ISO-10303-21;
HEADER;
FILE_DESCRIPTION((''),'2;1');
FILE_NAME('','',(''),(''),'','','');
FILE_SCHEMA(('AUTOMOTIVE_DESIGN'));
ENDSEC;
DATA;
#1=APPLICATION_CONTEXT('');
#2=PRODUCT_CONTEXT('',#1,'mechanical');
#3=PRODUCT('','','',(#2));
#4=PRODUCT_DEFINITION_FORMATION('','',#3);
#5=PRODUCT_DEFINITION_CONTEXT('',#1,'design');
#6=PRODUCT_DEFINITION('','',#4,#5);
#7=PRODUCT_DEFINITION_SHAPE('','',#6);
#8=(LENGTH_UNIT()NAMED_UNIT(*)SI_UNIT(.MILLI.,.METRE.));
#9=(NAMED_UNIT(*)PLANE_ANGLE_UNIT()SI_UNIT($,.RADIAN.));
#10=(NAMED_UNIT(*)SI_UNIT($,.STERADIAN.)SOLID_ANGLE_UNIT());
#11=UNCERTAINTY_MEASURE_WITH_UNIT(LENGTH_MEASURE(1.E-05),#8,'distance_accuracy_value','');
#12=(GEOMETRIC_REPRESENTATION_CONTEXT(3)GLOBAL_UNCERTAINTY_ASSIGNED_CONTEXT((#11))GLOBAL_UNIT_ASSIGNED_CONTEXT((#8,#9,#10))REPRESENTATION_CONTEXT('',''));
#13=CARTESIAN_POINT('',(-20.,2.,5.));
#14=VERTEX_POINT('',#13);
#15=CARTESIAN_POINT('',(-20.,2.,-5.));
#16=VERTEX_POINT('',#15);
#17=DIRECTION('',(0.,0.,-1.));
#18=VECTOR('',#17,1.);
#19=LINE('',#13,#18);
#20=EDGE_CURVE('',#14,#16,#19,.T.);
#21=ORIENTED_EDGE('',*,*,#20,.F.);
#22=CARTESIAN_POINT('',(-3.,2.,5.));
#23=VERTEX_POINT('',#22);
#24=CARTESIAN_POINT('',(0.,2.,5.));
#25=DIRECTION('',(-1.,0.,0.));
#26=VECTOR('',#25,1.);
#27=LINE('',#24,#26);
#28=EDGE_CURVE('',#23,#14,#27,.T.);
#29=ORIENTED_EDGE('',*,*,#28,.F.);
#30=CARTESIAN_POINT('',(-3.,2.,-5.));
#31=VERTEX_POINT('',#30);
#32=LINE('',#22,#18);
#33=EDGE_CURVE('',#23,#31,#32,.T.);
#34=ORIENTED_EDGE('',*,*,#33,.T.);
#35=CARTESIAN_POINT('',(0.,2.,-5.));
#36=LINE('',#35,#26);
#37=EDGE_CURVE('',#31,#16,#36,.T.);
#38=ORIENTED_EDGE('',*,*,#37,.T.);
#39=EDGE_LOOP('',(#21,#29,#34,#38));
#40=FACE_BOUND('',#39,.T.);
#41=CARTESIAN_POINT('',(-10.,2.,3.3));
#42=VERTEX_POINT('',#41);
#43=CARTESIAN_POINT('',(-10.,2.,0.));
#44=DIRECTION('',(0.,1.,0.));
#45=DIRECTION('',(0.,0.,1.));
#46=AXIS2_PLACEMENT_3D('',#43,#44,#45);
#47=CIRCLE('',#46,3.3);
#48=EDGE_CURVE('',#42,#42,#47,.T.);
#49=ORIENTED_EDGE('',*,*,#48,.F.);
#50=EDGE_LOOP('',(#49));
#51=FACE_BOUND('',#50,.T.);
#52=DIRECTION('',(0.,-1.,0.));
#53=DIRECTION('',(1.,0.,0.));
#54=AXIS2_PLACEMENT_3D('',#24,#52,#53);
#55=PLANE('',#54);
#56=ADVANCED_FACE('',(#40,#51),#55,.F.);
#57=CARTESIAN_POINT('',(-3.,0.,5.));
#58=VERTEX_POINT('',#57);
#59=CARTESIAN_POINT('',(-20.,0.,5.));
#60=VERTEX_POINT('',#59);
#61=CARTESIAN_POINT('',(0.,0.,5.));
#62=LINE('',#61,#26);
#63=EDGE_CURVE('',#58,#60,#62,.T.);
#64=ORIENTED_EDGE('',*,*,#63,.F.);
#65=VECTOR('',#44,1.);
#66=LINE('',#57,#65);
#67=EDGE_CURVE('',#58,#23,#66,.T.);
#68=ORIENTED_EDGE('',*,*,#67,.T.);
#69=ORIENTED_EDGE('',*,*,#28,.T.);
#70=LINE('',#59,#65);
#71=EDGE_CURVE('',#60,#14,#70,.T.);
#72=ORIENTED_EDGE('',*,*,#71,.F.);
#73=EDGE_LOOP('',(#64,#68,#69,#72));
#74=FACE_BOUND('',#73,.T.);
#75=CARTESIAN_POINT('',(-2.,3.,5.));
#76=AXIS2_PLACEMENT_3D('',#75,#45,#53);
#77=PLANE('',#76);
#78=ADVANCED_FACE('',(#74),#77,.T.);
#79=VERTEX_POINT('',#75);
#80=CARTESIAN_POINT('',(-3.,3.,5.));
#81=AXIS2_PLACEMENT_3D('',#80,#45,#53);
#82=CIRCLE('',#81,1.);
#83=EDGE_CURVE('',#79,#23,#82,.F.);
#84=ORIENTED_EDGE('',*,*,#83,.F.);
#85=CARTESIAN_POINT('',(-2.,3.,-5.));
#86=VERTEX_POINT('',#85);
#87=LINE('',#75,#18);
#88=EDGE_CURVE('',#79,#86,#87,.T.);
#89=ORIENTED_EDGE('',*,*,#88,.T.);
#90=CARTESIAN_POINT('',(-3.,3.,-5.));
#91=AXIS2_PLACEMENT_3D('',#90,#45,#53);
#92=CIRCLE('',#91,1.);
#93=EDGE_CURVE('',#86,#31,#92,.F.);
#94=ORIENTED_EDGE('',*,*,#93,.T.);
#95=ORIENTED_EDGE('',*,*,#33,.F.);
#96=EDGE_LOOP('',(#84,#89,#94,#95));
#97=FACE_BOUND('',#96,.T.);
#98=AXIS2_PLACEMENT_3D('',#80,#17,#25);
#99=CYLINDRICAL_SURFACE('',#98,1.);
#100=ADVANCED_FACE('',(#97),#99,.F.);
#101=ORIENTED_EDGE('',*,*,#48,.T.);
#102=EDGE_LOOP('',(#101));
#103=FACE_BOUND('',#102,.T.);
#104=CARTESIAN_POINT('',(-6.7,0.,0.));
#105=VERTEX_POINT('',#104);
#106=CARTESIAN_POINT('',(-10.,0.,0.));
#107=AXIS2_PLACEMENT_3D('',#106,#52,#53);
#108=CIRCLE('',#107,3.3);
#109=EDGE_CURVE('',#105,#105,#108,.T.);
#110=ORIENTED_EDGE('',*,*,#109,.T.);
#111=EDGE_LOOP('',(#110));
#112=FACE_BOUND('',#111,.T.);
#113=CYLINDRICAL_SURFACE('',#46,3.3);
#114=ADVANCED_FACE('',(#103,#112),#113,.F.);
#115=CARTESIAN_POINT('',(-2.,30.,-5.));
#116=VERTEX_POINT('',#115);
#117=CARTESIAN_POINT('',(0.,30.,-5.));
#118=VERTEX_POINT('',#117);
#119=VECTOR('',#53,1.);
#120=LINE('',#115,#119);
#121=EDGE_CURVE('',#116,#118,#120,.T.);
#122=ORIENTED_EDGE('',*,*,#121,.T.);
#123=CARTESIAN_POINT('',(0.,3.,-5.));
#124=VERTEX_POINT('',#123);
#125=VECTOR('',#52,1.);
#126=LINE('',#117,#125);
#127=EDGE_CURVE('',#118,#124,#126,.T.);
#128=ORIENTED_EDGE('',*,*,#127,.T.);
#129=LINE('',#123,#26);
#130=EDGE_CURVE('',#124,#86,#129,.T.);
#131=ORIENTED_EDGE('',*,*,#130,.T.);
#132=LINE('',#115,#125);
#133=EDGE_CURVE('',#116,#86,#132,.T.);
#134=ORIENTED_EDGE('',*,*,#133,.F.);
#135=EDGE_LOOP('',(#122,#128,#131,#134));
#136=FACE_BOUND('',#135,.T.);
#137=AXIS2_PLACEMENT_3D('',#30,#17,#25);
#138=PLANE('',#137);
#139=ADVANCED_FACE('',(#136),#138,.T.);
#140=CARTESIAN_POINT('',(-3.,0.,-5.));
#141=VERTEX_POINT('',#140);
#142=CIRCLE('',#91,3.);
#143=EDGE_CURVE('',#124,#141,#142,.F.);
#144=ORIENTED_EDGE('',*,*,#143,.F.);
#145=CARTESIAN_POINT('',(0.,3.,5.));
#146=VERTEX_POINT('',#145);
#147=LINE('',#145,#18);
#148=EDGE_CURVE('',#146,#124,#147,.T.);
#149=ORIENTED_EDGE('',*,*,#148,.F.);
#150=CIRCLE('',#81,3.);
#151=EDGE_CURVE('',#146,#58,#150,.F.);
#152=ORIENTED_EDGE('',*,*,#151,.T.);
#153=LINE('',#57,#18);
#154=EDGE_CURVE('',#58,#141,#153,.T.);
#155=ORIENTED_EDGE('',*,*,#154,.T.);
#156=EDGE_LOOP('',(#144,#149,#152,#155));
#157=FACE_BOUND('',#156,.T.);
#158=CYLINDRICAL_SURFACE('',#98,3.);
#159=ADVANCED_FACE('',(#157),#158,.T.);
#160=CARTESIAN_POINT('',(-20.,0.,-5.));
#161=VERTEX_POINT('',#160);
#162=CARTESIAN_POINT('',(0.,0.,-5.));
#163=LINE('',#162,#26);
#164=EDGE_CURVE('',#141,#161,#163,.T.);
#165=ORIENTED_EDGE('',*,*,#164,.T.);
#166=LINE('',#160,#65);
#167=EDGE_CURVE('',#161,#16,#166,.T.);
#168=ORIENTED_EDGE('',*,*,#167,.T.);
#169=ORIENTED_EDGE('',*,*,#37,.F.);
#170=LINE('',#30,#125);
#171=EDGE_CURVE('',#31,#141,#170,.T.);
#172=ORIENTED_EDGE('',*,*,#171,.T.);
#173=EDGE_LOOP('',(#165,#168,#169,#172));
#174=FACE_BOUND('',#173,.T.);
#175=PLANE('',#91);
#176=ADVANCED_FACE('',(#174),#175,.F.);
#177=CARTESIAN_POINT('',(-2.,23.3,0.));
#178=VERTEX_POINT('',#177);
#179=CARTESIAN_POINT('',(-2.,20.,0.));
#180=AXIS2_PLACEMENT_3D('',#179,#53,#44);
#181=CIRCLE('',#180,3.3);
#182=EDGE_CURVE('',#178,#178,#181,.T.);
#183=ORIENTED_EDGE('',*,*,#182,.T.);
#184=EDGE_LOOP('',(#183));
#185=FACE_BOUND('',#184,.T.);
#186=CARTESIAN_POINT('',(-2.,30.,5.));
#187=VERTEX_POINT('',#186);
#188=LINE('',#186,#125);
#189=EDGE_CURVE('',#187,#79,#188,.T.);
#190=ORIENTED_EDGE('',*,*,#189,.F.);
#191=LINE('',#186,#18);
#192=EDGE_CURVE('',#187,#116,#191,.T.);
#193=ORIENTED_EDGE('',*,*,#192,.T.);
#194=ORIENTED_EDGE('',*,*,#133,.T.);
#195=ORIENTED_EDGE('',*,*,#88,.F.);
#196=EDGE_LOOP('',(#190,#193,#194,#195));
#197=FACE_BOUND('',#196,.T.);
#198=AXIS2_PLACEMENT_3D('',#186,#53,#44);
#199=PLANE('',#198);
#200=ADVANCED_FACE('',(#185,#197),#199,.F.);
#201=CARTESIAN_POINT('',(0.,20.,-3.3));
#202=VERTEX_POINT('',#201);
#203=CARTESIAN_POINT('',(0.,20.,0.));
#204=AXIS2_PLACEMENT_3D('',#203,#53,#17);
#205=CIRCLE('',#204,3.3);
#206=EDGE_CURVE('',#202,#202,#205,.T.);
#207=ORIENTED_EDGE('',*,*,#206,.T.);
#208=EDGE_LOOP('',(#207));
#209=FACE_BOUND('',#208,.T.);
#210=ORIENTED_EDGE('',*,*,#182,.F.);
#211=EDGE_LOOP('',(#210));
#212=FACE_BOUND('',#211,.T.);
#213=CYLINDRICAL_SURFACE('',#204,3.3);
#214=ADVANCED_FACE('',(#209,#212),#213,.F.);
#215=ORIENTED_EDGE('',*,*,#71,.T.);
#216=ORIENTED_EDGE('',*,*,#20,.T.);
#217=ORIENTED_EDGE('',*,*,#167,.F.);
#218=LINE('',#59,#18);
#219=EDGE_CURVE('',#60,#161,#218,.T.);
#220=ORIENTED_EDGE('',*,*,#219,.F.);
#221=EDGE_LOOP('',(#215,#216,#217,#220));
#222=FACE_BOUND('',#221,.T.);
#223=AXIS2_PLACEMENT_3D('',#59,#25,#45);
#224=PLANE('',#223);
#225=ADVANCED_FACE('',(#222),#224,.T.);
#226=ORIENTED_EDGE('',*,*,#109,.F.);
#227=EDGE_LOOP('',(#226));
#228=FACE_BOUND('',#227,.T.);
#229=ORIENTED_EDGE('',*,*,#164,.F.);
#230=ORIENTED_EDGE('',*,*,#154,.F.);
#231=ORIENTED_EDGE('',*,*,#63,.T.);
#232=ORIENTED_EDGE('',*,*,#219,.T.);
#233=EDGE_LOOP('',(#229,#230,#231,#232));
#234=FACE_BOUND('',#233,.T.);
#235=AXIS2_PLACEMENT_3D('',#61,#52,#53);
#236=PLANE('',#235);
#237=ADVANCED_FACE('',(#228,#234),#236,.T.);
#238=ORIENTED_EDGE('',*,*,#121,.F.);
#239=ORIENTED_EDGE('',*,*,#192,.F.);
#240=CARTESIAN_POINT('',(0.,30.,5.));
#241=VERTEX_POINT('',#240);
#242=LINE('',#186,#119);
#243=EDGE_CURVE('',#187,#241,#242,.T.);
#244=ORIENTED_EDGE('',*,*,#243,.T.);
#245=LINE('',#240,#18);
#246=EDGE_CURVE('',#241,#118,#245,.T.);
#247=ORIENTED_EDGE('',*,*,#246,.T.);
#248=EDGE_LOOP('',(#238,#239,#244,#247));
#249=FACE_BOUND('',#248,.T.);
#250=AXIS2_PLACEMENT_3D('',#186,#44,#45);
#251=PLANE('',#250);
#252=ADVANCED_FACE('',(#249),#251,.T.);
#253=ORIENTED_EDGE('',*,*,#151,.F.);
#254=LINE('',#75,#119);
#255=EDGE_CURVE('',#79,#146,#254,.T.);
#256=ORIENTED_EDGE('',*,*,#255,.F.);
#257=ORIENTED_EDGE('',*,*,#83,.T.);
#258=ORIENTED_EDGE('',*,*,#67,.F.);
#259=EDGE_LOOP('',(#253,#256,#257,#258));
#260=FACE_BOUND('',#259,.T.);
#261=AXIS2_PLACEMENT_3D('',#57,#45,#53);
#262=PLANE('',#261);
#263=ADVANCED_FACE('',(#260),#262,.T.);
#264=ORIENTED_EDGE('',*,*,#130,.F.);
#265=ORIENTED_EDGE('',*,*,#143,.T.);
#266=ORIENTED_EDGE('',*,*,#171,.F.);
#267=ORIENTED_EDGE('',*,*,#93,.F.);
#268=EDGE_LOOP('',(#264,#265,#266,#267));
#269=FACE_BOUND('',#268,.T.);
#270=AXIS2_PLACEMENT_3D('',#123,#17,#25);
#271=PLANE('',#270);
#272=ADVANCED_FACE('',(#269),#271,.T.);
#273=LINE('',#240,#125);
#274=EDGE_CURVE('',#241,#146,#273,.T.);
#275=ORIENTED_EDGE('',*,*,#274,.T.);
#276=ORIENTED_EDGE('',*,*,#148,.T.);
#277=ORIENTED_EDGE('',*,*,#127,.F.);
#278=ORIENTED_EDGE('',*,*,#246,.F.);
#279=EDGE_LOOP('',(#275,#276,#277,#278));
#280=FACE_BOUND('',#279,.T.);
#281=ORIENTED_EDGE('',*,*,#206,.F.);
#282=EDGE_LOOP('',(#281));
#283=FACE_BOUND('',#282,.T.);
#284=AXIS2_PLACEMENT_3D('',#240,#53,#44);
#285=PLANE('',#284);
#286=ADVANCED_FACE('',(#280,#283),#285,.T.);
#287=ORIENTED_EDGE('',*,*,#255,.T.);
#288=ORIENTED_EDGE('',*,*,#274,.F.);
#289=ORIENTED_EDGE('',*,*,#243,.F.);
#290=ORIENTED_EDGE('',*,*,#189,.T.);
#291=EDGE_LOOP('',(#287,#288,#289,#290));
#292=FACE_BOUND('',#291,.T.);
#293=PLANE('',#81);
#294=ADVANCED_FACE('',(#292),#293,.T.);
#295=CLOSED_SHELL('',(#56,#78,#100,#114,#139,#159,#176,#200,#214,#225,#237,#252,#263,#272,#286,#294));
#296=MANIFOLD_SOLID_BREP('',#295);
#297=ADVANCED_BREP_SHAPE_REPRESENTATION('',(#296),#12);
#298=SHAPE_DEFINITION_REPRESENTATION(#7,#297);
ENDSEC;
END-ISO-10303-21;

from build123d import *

# Parameters (mm, degrees)
BRIDA_BASE1_DEPTH                          = 5
TALADRO_DE_MARGEN_PARA_M65_D               = 6.6
TALADRO_DE_MARGEN_PARA_M65_DEPTH           = 11.62
TALADRO_DE_MARGEN_PARA_M65_TIP             = 1.982840043
TALADRO_DE_MARGEN_PARA_M65_ON_FACE_2_D     = 6.6
TALADRO_DE_MARGEN_PARA_M65_ON_FACE_2_DEPTH = 11.62
TALADRO_DE_MARGEN_PARA_M65_ON_FACE_2_TIP   = 1.982840043


# Sheet-metal steps are written as plain solids
with BuildPart() as part:
    # Croquis1 → Brida base1 (new, symmetric)
    with BuildSketch(Plane.XY):
        with BuildLine():
            Line((0, 30), (0, 3))
            ThreePointArc((0, 3), (-0.878679656, 0.878679656), (-3, 0))
            Line((-3, 0), (-20, 0))
            Line((-20, 0), (-20, 2))
            Line((-20, 2), (-3, 2))
            ThreePointArc((-3, 2), (-2.292893219, 2.292893219), (-2, 3))
            Line((-2, 3), (-2, 30))
            Line((-2, 30), (0, 30))
        make_face()
    extrude(amount=BRIDA_BASE1_DEPTH, both=True)

    # Taladro de margen para M65
    with Locations(Plane(origin=(0, 20, 0), x_dir=(0, 1, 0), z_dir=(1, 0, 0))):
        with Locations((0, 0)):
            Hole(TALADRO_DE_MARGEN_PARA_M65_D / 2, depth=TALADRO_DE_MARGEN_PARA_M65_DEPTH)
            with Locations((0, 0, -(TALADRO_DE_MARGEN_PARA_M65_DEPTH + TALADRO_DE_MARGEN_PARA_M65_TIP / 2))):  # 118° drill point
                Cone(0, TALADRO_DE_MARGEN_PARA_M65_D / 2, TALADRO_DE_MARGEN_PARA_M65_TIP, mode=Mode.SUBTRACT)

    # Taladro de margen para M65 on face 2
    with Locations(Plane(origin=(-10, 2, 0), x_dir=(0, 0, 1), z_dir=(0, 1, 0))):
        with Locations((0, 0)):
            Hole(TALADRO_DE_MARGEN_PARA_M65_ON_FACE_2_D / 2, depth=TALADRO_DE_MARGEN_PARA_M65_ON_FACE_2_DEPTH)
            with Locations((0, 0, -(TALADRO_DE_MARGEN_PARA_M65_ON_FACE_2_DEPTH + TALADRO_DE_MARGEN_PARA_M65_ON_FACE_2_TIP / 2))):  # 118° drill point
                Cone(0, TALADRO_DE_MARGEN_PARA_M65_ON_FACE_2_D / 2, TALADRO_DE_MARGEN_PARA_M65_ON_FACE_2_TIP, mode=Mode.SUBTRACT)


solid = part.part
